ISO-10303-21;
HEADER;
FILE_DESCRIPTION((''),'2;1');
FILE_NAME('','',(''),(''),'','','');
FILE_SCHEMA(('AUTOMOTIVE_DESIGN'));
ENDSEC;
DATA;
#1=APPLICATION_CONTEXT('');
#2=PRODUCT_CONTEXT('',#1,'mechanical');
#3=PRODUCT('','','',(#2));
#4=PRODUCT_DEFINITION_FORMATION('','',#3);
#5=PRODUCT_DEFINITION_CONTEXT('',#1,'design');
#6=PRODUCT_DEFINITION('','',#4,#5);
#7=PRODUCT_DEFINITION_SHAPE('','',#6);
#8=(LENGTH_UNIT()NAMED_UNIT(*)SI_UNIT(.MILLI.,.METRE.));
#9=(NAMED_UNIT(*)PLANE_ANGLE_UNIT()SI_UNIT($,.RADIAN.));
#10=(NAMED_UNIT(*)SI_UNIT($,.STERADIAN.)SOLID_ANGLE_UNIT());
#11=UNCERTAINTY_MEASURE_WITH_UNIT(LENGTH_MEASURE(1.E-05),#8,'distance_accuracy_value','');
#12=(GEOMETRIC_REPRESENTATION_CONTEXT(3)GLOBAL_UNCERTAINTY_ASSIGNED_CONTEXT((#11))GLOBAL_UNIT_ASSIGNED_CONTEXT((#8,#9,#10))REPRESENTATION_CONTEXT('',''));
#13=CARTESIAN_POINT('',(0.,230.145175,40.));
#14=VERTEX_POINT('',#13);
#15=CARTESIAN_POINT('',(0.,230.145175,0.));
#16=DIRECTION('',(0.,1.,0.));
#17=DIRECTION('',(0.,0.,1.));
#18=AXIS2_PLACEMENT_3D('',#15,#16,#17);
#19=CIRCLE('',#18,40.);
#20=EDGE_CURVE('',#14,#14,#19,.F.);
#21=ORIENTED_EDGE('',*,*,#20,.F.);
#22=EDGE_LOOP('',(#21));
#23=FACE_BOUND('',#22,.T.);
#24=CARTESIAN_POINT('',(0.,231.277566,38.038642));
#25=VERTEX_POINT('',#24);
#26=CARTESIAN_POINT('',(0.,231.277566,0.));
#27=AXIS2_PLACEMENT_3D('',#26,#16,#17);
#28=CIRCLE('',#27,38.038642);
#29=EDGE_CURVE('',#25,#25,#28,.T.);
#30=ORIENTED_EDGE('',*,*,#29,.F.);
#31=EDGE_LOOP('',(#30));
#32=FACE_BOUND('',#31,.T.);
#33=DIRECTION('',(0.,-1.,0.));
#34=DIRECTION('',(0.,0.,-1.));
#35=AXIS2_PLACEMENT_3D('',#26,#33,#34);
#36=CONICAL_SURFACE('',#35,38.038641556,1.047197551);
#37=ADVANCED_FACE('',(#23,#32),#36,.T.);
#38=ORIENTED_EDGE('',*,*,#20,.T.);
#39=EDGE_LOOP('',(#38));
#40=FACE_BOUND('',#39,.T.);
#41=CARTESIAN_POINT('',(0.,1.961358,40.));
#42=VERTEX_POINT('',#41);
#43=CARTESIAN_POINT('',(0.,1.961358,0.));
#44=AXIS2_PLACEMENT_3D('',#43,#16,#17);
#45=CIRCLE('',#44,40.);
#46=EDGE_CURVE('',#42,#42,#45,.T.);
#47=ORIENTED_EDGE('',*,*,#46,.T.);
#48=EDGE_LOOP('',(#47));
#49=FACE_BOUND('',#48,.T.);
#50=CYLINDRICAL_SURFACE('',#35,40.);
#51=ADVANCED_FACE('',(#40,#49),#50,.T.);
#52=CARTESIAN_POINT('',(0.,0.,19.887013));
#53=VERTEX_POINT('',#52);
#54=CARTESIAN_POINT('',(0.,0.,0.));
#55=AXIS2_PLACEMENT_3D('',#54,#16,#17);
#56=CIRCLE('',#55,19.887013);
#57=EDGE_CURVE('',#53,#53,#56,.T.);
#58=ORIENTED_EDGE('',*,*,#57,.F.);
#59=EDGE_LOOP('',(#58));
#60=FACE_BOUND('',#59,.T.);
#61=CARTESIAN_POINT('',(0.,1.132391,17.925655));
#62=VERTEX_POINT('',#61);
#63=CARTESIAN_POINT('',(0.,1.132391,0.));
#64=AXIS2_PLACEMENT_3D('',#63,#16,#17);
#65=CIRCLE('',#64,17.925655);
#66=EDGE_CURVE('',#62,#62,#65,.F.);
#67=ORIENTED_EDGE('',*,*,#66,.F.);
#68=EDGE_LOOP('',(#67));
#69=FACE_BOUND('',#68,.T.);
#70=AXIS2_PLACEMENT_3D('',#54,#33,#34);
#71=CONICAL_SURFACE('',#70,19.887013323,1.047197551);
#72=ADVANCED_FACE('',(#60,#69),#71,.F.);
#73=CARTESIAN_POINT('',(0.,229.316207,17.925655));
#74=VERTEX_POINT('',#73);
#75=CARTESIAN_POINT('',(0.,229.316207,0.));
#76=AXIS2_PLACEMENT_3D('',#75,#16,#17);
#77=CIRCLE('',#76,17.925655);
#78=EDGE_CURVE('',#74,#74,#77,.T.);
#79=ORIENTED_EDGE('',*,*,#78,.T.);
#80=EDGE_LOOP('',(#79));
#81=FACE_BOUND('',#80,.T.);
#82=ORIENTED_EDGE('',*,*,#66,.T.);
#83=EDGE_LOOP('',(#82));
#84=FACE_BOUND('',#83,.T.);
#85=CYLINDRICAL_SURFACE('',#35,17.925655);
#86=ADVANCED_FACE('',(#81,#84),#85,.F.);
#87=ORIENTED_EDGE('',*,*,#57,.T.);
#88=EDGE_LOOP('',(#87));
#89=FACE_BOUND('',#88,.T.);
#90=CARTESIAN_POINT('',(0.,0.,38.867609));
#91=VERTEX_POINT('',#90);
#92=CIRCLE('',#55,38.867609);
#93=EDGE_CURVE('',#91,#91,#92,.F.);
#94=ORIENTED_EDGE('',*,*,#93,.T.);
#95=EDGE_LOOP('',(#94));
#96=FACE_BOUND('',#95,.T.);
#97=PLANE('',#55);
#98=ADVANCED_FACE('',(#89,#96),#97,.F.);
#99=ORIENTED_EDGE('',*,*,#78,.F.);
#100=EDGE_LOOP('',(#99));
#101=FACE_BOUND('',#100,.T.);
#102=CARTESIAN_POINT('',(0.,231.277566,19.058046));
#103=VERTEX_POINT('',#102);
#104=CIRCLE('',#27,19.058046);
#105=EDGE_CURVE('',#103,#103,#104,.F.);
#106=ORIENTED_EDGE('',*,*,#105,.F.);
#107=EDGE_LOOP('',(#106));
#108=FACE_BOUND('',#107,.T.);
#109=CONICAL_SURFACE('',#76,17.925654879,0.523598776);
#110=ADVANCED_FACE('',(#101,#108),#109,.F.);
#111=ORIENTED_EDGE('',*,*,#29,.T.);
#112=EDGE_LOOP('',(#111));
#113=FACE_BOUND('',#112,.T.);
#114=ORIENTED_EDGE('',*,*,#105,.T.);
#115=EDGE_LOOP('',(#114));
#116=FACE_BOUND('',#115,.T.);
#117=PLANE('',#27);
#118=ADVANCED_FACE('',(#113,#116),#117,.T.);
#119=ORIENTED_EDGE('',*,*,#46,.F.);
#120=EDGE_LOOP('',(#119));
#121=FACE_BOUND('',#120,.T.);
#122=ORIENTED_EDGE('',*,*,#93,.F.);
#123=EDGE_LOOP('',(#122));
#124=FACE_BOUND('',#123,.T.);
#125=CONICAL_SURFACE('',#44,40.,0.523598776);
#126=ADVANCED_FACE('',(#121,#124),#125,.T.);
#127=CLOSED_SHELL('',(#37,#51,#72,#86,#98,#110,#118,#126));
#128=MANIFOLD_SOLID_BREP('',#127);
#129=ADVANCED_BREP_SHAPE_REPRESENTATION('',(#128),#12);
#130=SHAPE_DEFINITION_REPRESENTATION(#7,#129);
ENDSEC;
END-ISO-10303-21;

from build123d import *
from OCP.BRepFilletAPI import BRepFilletAPI_MakeChamfer

# Parameters (mm, degrees)
SKETCH1_R           = 40
BOSS_EXTRUDE1_DEPTH = 231.2775658
SKETCH2_R           = 17.925654879
CUT_EXTRUDE1_DEPTH  = 239.095175177
CHAMFER1_SIZE       = 1.132390825
CHAMFER1_SIZE2      = 1.961358444


with BuildPart() as part:
    # Sketch1 → Boss-Extrude1 (new body)
    with BuildSketch(Plane(origin=(0, 0, 0), x_dir=(1, 0, 0), z_dir=(0, 1, 0))):
        Circle(SKETCH1_R)
    extrude(amount=BOSS_EXTRUDE1_DEPTH)

    # Sketch2 → Cut-Extrude1 (cut, through all)
    with BuildSketch(Plane(origin=(0, 0, 0), x_dir=(1, 0, 0), z_dir=(0, 1, 0))):
        Circle(SKETCH2_R)
    extrude(amount=CUT_EXTRUDE1_DEPTH, mode=Mode.SUBTRACT)

    # Chamfer1: one chamfer whose edges measure the first distance from different faces: ONE call of the kernel's chamfer builder (chamfer() names one face for all edges)
    chamfer1_edges_1 = [part.edges().sort_by_distance(p)[0] for p in [
        (-17.925654879, 231.2775658, 0),
    ]]
    chamfer1_side_1 = [part.faces().sort_by_distance(p)[0] for p in [
        (-38.86862915, 231.2775658, 0),
    ]]
    chamfer1_edges_2 = [part.edges().sort_by_distance(p)[0] for p in [
        (-17.925654879, 0, 0),
    ]]
    chamfer1_side_2 = [part.faces().sort_by_distance(p)[0] for p in [
        (-17.925654879, 115.6387829, 0),
    ]]
    chamfer1_edges_3 = [part.edges().sort_by_distance(p)[0] for p in [
        (-40, 0, 0),
    ]]
    chamfer1_side_3 = [part.faces().sort_by_distance(p)[0] for p in [
        (-38.86862915, 0, 0),
    ]]
    chamfer1_edges_4 = [part.edges().sort_by_distance(p)[0] for p in [
        (-40, 231.2775658, 0),
    ]]
    chamfer1_side_4 = [part.faces().sort_by_distance(p)[0] for p in [
        (-40, 115.6387829, 0),
    ]]
    chamfer1 = BRepFilletAPI_MakeChamfer(part.part.solid().wrapped)
    for e in chamfer1_edges_1:
        chamfer1.Add(CHAMFER1_SIZE, CHAMFER1_SIZE2, e.wrapped, chamfer1_side_1[0].wrapped)  # the first distance lies on this face
    for e in chamfer1_edges_2:
        chamfer1.Add(CHAMFER1_SIZE, CHAMFER1_SIZE2, e.wrapped, chamfer1_side_2[0].wrapped)  # the first distance lies on this face
    for e in chamfer1_edges_3:
        chamfer1.Add(CHAMFER1_SIZE, CHAMFER1_SIZE2, e.wrapped, chamfer1_side_3[0].wrapped)  # the first distance lies on this face
    for e in chamfer1_edges_4:
        chamfer1.Add(CHAMFER1_SIZE, CHAMFER1_SIZE2, e.wrapped, chamfer1_side_4[0].wrapped)  # the first distance lies on this face
    add(Compound.cast(chamfer1.Shape()), mode=Mode.REPLACE)


solid = part.part
